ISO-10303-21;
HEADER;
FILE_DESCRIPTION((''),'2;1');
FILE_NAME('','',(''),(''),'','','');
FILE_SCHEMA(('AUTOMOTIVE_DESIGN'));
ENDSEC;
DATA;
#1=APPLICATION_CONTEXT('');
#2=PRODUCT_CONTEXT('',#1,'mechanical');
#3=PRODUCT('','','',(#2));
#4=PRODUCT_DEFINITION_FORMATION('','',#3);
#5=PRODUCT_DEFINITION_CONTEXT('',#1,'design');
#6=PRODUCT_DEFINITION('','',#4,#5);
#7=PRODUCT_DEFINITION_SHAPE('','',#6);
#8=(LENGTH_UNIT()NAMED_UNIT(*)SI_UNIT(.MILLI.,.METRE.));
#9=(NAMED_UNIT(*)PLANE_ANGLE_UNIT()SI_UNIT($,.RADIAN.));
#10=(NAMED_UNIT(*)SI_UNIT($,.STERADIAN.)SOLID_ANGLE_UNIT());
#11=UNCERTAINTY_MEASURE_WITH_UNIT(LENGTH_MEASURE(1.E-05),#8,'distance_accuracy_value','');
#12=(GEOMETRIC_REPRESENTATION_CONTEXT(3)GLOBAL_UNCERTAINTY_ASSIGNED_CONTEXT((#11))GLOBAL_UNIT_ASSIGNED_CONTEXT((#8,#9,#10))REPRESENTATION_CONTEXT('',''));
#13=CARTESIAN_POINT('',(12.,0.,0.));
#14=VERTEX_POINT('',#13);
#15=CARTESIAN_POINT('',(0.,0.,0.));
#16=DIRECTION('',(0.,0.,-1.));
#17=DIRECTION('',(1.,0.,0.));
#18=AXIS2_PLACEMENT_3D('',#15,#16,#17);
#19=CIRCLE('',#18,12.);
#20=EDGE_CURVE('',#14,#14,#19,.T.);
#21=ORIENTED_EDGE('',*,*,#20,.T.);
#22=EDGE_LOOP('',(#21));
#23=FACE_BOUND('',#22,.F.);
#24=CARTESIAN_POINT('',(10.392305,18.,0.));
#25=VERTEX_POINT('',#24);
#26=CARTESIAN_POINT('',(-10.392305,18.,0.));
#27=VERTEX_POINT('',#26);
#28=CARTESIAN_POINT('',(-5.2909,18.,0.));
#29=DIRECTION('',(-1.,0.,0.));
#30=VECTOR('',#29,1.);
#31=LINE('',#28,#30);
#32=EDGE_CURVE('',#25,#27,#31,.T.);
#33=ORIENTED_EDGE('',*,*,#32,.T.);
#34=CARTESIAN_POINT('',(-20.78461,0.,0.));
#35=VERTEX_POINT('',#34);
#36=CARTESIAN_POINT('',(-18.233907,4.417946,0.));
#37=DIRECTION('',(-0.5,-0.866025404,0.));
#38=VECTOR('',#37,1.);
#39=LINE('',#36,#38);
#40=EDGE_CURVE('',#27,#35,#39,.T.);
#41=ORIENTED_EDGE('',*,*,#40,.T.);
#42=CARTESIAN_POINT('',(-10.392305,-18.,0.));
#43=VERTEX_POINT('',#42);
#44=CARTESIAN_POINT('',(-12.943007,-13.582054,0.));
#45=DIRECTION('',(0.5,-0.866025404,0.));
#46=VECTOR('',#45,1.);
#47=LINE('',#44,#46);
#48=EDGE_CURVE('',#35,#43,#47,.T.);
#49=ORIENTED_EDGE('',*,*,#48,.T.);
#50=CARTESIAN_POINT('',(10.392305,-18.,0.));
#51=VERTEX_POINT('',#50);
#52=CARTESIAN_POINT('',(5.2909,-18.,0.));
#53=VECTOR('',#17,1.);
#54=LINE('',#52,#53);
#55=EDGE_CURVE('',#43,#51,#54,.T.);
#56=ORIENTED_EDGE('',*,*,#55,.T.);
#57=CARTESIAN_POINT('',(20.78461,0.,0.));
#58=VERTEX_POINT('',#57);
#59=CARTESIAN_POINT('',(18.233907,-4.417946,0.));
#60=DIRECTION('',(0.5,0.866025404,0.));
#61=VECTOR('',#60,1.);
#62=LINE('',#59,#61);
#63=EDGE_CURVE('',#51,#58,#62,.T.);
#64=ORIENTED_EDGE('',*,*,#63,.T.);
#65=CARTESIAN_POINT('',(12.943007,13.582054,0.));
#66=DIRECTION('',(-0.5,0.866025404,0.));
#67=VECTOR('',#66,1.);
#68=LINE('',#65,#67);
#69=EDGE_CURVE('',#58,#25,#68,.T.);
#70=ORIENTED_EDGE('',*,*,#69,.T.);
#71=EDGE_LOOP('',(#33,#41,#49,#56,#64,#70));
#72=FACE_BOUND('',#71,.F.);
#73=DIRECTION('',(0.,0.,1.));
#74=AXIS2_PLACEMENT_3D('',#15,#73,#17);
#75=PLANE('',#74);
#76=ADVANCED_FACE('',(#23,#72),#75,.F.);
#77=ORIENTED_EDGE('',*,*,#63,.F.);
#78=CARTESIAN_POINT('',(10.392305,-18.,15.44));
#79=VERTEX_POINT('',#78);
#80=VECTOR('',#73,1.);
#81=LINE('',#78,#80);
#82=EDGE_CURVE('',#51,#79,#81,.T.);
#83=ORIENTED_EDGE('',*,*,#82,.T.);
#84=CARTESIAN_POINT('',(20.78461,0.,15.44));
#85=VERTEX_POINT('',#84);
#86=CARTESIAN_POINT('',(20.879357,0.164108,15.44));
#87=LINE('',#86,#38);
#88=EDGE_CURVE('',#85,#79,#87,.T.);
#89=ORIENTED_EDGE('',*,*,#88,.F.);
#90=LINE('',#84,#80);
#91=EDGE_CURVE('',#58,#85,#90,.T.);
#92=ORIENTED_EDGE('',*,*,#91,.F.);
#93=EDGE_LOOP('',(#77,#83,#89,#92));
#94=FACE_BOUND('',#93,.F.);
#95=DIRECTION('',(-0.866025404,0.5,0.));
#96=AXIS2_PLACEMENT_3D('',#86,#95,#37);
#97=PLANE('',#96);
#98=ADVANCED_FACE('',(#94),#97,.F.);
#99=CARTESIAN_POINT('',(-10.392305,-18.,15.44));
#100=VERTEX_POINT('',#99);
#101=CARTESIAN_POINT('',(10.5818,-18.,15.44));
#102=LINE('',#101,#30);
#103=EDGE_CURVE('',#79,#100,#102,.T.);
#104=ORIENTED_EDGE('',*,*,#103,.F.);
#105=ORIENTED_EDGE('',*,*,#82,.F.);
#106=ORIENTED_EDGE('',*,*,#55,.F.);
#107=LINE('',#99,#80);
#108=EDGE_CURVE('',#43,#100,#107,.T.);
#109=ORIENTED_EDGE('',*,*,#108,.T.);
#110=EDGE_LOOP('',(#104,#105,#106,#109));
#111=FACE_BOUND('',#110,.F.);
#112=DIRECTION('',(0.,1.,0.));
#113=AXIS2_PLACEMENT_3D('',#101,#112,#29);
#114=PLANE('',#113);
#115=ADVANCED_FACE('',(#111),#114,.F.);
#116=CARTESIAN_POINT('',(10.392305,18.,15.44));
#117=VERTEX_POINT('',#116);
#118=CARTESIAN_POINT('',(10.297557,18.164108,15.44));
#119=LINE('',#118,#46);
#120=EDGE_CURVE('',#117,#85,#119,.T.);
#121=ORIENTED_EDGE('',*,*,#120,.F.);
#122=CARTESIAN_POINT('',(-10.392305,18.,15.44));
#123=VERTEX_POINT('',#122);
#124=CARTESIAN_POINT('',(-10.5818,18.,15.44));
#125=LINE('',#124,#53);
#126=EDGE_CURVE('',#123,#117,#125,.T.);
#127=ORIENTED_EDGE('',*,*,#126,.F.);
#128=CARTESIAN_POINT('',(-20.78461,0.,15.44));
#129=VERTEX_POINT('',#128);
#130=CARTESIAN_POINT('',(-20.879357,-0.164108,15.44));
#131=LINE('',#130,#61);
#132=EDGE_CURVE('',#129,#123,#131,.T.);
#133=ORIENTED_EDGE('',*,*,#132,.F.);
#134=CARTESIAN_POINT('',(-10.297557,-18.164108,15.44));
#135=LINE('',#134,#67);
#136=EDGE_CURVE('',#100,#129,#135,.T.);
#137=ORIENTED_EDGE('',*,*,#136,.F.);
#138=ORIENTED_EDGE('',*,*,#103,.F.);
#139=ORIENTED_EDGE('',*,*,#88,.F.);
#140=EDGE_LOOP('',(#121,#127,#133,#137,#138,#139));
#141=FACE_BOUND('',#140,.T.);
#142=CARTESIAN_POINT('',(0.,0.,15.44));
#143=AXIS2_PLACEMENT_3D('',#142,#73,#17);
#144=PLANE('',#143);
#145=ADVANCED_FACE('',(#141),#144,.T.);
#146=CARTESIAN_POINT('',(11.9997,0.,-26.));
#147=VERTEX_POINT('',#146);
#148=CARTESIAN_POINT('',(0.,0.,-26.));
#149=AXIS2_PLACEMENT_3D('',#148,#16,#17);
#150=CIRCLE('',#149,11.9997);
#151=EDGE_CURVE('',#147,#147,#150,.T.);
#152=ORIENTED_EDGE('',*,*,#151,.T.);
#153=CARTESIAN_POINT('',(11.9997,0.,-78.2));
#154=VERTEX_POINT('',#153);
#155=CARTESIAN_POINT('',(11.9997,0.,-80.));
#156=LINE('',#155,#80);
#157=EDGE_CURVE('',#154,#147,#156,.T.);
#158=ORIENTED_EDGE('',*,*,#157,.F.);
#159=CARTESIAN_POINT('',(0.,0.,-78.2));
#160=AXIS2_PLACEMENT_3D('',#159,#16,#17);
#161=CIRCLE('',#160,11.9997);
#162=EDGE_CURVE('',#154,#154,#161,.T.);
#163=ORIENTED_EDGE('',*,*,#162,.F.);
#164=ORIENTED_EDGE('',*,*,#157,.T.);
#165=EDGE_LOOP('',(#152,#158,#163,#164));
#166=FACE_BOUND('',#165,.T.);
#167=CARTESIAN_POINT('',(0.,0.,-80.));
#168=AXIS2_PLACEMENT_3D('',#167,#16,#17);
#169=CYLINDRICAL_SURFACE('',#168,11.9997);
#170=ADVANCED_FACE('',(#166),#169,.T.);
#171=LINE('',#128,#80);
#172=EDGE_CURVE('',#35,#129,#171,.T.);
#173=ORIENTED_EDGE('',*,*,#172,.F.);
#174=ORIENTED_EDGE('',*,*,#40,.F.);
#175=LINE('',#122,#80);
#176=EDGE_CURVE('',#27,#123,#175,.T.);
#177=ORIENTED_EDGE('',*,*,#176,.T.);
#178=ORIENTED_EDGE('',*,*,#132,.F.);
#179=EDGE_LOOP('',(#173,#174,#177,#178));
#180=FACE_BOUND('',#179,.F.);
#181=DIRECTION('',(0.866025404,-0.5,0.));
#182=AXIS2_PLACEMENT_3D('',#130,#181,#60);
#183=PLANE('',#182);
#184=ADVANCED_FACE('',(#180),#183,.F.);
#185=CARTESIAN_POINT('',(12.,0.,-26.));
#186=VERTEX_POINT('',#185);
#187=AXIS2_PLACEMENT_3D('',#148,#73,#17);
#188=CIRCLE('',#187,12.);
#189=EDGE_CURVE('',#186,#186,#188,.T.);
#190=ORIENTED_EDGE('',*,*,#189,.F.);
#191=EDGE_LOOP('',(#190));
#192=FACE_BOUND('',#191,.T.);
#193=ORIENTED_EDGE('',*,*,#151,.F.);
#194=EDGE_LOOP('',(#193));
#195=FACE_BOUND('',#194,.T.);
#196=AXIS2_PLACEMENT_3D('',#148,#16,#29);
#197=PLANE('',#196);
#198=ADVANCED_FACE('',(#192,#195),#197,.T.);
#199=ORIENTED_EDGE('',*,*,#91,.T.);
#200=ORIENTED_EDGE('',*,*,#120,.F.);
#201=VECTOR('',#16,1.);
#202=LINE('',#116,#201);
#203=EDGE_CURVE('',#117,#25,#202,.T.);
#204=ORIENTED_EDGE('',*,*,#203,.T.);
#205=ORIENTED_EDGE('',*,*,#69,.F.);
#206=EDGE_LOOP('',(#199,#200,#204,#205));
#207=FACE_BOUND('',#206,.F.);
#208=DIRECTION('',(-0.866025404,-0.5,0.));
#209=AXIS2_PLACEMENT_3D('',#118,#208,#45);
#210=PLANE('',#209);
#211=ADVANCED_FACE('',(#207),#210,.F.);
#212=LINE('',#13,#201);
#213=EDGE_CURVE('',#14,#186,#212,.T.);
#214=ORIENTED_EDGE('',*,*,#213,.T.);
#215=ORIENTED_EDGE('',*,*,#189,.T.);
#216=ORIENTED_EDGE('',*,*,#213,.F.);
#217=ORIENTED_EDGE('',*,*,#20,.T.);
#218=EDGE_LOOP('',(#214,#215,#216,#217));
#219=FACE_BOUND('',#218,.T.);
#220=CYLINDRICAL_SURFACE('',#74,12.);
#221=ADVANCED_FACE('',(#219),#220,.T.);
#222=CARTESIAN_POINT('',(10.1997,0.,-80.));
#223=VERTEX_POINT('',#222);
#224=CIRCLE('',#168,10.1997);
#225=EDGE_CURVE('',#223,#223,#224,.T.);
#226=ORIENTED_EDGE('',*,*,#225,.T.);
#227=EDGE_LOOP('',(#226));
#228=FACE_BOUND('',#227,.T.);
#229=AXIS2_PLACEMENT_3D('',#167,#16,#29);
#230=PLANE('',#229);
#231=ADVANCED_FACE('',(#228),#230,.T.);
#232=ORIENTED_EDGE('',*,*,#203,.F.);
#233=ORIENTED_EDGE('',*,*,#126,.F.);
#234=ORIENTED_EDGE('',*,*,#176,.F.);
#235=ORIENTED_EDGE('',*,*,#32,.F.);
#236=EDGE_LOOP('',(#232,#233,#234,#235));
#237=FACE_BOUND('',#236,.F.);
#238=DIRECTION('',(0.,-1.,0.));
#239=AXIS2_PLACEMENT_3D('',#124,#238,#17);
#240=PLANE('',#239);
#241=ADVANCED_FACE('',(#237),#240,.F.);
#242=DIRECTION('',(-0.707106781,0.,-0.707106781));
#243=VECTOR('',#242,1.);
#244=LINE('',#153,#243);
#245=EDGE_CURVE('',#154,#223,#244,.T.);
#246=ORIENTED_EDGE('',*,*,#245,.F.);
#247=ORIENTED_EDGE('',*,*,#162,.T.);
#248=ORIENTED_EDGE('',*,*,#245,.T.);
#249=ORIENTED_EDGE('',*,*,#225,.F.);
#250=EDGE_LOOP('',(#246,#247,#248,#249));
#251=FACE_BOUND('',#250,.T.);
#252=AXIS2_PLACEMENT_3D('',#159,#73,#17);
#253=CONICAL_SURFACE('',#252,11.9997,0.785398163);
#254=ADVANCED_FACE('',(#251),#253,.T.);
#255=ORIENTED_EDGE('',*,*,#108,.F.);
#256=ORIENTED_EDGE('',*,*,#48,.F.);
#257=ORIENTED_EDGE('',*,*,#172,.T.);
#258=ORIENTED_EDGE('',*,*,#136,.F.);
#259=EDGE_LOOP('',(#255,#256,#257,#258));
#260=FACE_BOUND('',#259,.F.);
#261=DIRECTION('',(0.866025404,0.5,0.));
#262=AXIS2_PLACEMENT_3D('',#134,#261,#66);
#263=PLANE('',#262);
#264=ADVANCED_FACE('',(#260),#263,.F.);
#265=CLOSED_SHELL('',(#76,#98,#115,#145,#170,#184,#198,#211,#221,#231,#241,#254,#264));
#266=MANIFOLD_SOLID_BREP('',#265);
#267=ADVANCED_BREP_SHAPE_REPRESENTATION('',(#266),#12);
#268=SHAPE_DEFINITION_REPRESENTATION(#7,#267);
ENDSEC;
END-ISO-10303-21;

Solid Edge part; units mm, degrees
sketch "Sketch1" plane through (0, 0, 0) normal (0, 0, 1) x (1, 0, 0)
  circle A0 centre (0, 0) radius 20.88
  dimension "D1" = 41.76
extrude "Protrusion1" add sketch "Sketch1" along normal blind 15.44
sketch "Sketch2" plane through (0, 0, 0) normal (0, 0, -1) x (1, 0, 0)
  circle A0 centre (0, 0) radius 12
extrude "Protrusion2" add sketch "Sketch2" along normal blind 80
sketch "Sketch3" plane through (0, 0, -80) normal (0, 0, -1) x (1, 0, 0)
  circle A0 centre (0, 0) radius 11.9997
extrude "Cutout1" cut sketch "Sketch3" against normal blind 54 flip side to cut
chamfer "Chamfer_1" distance 1.8 angle 45 1 edges at (-11.9997, 0, -80)
sketch "Sketch4" plane through (0, 0, 15.44) normal (0, 0, 1) x (1, 0, 0)
  line L0 (-10.5818, 18) -> (10.5818, 18)
  dimension "D1" = 36
extrude "Cutout2" cut sketch "Sketch4" against normal up to next material side at (0, 18.05, 15.44)
pattern_circular "Pattern1" count 6 over 360 about axis through (0, 0, 15.44) along (0, 0, 1) of "Cutout2"
properties part number "300520"
